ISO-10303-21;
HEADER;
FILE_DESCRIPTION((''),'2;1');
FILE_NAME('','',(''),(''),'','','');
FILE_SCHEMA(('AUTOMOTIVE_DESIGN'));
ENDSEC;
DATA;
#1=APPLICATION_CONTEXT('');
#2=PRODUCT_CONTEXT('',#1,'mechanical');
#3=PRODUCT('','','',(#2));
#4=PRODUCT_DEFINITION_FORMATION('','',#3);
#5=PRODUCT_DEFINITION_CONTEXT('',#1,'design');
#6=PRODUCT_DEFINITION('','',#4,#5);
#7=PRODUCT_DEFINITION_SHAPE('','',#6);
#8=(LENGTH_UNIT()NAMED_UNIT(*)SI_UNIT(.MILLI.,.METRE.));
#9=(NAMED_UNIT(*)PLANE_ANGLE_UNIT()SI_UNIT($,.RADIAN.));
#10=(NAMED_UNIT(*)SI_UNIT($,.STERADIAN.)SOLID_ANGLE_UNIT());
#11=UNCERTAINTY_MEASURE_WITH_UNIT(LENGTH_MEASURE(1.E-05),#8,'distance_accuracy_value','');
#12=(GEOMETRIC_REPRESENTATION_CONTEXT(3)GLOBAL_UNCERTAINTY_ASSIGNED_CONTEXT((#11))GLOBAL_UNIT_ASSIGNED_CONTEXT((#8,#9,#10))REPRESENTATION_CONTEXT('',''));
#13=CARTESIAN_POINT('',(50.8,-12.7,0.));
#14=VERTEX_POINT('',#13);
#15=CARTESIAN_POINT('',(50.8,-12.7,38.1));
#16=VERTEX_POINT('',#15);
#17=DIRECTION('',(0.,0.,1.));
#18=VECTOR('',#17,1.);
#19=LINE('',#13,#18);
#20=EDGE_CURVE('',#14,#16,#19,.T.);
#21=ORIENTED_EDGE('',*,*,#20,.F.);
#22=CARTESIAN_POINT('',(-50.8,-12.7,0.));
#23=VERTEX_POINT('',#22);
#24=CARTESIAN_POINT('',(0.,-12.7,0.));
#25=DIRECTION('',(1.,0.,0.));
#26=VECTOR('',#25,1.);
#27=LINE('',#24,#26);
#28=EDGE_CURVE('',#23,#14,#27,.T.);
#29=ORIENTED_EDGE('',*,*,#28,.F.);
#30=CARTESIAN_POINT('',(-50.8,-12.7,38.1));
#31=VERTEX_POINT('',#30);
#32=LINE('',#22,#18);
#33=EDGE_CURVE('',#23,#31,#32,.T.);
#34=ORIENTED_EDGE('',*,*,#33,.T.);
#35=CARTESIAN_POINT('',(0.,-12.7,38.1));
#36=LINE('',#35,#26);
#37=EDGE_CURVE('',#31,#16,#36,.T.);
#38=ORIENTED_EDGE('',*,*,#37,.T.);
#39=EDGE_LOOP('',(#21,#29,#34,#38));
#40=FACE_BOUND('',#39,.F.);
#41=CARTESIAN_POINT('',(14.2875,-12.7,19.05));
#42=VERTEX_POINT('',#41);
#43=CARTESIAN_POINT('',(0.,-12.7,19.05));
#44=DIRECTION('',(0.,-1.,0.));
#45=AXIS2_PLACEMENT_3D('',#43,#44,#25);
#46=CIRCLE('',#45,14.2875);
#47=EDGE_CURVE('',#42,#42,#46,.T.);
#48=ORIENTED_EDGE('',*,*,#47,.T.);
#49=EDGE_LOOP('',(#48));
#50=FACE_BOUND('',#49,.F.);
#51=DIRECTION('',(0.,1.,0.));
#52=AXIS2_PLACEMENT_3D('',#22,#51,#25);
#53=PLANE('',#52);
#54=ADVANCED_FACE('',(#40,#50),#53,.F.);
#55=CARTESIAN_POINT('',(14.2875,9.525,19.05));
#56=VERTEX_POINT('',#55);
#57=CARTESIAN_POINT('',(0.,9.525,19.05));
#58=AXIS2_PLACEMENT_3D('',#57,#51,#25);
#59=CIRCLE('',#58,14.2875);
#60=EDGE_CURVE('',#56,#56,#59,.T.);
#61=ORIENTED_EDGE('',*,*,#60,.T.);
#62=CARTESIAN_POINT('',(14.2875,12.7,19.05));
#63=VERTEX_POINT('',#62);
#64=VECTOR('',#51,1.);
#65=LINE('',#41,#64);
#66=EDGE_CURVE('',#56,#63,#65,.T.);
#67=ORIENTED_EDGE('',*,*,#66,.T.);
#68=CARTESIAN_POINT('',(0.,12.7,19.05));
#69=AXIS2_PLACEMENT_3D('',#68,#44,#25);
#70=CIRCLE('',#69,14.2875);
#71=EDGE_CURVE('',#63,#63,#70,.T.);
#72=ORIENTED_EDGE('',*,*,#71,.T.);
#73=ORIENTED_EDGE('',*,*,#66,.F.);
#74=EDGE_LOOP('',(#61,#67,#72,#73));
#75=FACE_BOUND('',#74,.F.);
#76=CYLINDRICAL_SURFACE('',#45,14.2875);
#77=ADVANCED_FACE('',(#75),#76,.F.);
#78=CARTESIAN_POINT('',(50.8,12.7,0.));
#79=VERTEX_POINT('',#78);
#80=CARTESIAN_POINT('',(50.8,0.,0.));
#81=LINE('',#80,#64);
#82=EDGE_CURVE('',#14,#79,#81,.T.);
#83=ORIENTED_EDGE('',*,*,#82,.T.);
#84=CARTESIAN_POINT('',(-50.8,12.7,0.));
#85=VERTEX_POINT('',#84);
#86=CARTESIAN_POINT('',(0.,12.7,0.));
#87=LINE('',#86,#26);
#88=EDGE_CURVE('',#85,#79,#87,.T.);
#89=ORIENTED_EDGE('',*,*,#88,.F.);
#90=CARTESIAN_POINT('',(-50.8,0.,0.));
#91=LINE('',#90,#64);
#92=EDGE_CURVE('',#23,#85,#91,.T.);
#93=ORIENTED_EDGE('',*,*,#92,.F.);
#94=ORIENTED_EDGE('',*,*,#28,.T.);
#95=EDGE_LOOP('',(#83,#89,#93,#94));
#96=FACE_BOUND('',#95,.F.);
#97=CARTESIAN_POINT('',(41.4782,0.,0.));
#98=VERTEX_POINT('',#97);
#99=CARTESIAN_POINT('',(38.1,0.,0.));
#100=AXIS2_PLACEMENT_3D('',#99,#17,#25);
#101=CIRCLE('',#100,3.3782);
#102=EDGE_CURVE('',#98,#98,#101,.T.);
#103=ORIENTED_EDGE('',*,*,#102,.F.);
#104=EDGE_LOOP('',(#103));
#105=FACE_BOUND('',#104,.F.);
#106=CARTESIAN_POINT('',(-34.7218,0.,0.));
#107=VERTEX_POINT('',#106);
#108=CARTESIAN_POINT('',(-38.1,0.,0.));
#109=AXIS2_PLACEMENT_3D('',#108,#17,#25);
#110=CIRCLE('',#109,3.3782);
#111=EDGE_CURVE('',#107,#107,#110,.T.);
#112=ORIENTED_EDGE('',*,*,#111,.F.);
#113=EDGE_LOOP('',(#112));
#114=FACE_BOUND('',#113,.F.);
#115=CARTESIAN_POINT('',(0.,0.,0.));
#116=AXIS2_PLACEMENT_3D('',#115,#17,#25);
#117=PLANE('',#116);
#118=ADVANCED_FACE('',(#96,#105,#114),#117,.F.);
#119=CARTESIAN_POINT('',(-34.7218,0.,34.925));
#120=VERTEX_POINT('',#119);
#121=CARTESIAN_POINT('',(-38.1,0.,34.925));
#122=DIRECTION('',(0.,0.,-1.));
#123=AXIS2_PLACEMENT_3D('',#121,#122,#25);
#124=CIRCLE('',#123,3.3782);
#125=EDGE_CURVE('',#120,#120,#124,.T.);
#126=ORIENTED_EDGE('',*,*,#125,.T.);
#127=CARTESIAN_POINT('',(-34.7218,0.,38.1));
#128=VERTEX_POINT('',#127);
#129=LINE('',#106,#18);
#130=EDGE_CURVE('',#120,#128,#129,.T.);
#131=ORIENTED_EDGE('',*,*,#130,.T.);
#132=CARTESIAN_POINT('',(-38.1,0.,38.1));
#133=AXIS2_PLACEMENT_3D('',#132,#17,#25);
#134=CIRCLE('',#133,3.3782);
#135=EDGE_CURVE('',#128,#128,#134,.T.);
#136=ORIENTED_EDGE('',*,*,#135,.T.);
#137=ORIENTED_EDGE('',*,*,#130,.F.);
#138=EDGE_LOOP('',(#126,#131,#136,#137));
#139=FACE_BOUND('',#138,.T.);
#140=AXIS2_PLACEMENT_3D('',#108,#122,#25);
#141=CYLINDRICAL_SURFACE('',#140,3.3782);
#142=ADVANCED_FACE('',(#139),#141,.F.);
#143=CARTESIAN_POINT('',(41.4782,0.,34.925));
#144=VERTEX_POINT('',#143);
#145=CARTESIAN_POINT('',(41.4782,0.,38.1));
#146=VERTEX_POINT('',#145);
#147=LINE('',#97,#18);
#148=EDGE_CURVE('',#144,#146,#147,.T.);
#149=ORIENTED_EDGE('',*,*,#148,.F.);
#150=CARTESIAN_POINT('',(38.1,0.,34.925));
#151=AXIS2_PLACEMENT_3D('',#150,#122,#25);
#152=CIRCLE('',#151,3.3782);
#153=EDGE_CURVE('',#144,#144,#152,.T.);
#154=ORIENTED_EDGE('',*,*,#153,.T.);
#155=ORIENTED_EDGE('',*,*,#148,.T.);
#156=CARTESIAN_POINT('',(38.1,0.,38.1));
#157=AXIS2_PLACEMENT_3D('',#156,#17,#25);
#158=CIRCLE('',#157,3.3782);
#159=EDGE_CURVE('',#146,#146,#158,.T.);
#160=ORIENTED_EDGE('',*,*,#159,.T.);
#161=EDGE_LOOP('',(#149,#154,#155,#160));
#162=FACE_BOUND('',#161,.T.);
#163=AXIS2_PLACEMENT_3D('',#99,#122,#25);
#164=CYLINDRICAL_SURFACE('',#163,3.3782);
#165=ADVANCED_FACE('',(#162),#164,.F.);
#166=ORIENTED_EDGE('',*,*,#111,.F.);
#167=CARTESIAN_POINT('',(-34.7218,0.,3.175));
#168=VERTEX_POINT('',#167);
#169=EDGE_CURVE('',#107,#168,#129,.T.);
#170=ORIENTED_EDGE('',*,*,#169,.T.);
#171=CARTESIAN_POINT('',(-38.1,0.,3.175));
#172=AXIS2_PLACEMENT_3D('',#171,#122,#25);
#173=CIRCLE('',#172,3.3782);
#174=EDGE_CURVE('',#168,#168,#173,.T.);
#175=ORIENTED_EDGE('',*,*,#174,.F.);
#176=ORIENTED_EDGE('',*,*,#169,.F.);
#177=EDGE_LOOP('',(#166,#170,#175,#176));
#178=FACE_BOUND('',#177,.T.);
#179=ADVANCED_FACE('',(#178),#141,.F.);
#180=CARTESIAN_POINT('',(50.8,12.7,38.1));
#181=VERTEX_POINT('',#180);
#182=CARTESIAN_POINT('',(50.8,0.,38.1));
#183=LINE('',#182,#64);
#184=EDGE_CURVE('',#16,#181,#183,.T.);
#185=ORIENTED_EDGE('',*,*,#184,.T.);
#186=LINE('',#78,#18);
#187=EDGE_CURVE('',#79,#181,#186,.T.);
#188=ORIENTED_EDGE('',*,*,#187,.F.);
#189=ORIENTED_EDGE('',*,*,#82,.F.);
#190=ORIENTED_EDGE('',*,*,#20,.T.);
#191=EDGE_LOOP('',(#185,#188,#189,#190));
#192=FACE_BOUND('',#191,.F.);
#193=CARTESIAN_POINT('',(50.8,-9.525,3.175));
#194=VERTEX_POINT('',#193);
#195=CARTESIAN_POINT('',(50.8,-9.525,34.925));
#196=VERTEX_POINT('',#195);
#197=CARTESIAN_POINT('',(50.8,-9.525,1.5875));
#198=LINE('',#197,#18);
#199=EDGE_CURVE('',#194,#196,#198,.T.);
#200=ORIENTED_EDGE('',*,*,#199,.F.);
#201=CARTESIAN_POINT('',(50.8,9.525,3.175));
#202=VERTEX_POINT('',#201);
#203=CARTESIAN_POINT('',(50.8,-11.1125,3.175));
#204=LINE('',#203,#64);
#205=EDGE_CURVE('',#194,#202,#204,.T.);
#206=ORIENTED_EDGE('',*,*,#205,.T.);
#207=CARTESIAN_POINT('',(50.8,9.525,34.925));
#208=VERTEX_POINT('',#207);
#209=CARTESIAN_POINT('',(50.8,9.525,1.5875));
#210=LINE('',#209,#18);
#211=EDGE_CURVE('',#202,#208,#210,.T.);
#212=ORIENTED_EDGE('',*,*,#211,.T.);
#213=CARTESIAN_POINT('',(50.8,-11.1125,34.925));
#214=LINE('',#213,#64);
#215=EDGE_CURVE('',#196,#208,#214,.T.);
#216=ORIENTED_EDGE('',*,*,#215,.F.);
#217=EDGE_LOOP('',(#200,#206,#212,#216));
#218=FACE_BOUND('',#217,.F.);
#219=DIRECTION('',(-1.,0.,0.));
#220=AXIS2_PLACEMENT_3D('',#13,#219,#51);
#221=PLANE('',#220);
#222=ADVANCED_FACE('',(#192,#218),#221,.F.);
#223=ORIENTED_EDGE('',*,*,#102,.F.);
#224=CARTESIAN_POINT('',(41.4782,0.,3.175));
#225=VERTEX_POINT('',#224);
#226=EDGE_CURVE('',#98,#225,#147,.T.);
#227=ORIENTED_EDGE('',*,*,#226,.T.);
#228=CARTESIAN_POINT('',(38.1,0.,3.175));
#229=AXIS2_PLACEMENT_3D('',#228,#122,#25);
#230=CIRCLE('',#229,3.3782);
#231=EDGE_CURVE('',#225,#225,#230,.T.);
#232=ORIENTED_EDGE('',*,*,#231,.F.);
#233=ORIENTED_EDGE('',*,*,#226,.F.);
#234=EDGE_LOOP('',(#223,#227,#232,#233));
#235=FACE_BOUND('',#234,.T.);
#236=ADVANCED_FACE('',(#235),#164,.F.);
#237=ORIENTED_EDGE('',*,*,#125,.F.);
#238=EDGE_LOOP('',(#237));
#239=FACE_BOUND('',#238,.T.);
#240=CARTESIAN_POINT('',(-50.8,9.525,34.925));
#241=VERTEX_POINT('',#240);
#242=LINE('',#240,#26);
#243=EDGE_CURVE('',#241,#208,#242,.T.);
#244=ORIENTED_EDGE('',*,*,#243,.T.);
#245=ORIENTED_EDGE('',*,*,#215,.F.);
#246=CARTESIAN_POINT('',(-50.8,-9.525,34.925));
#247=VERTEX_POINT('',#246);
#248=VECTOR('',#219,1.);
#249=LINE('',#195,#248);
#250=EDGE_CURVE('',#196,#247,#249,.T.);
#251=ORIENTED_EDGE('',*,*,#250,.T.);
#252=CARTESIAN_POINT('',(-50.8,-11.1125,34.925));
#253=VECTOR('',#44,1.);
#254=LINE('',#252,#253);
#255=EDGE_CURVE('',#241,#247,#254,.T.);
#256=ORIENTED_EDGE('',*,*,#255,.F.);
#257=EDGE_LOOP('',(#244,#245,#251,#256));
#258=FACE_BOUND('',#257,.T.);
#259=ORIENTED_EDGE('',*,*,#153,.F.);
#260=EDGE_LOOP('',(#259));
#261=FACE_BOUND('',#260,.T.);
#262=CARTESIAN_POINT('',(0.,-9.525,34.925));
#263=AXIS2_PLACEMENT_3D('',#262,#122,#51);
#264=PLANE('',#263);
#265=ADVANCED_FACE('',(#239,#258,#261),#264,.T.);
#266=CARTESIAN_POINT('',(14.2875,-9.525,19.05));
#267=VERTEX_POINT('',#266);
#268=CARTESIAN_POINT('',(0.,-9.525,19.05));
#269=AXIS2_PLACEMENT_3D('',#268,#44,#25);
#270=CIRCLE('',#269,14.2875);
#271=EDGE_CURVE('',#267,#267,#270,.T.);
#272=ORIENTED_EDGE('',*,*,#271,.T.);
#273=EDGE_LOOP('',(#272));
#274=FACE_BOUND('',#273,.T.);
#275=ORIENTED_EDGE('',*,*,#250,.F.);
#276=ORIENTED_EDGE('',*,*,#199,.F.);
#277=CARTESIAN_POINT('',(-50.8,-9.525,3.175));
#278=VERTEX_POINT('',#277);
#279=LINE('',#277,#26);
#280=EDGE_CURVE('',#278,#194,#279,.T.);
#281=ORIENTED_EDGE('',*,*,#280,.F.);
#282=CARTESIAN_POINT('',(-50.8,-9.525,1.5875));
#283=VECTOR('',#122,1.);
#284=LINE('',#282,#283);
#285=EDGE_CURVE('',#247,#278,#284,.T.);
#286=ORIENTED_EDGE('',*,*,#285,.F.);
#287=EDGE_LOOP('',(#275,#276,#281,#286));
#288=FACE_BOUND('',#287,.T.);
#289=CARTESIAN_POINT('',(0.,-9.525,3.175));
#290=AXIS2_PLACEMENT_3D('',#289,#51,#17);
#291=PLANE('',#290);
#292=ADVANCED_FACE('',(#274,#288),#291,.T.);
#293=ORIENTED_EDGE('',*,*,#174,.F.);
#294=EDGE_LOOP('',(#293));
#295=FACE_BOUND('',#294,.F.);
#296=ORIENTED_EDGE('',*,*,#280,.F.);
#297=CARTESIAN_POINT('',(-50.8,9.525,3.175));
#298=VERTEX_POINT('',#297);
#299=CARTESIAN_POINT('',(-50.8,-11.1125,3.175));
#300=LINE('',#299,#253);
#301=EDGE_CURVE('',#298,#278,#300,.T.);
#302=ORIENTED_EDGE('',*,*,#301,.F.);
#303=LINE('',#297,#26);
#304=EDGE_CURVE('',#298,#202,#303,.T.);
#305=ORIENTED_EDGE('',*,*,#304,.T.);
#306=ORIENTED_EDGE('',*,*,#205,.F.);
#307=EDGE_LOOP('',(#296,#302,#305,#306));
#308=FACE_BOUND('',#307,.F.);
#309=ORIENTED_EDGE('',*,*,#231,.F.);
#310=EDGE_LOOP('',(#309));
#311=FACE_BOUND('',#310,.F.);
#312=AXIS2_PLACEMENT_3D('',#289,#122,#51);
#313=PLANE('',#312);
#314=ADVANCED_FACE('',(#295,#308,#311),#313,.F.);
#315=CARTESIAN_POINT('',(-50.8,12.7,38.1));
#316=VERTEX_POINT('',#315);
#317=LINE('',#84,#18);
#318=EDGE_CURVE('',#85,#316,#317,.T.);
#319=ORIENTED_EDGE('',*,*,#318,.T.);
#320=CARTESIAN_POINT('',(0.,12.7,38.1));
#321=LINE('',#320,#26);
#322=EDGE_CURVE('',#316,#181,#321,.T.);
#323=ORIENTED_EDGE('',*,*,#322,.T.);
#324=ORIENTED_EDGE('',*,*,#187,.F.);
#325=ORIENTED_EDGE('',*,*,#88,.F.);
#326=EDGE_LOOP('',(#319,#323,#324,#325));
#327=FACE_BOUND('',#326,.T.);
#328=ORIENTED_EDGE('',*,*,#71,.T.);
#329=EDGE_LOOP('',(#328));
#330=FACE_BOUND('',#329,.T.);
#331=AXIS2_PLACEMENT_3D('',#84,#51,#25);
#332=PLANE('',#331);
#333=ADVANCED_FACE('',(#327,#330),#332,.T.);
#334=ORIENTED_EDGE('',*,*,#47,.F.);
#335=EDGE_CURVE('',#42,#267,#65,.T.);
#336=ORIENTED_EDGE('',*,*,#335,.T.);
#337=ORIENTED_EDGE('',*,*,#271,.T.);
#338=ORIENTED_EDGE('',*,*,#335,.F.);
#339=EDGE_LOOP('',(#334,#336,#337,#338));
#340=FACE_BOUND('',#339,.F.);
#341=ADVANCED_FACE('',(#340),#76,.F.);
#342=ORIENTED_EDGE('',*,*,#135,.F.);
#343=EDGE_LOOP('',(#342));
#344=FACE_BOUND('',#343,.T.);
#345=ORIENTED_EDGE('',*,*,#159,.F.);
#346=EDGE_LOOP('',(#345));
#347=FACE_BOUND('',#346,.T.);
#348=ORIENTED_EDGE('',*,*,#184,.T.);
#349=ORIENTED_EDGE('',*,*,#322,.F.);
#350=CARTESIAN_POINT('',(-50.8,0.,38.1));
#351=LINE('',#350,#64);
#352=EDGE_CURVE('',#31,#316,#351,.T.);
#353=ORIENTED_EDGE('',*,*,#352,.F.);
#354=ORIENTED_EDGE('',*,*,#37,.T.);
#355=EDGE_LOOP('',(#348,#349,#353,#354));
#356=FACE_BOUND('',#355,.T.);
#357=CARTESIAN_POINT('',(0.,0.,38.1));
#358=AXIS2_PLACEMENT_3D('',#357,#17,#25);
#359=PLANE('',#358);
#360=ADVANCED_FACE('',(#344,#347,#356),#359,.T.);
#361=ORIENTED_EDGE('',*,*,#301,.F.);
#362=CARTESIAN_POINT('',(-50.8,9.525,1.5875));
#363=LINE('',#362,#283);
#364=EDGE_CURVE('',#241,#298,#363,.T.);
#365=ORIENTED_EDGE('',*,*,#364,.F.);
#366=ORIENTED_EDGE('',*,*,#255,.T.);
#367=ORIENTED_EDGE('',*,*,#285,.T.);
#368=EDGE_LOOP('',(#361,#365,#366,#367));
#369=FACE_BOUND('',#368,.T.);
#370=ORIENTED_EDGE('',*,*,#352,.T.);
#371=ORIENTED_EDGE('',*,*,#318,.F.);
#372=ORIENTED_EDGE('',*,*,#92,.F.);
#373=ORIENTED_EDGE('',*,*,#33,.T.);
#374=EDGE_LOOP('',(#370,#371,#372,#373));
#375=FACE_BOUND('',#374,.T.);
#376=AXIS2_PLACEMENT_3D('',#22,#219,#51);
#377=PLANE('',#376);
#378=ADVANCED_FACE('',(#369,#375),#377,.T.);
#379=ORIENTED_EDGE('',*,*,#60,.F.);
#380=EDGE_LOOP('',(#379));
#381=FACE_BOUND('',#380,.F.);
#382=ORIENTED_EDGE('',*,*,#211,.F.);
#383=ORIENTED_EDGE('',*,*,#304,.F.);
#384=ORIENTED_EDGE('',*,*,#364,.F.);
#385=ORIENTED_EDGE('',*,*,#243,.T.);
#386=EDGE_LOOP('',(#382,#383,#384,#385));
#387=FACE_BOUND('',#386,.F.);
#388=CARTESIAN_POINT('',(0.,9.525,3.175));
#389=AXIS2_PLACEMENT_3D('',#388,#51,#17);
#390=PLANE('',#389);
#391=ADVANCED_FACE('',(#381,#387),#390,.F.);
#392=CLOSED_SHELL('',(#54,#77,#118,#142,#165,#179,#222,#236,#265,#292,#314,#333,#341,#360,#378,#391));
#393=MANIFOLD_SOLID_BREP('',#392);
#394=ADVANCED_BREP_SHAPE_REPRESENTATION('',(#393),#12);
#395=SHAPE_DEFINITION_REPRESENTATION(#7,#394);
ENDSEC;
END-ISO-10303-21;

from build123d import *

# Parameters (mm, degrees)
F0_W          = 101.6
F0_H          = 25.4
F0_R          = 3.3782
F1_DEPTH      = 38.1
F2_R          = 14.2875
F3_DEPTH      = 25.4
F4_W          = 19.05
F4_H          = 31.75
F5_DEPTH      = 50.801
F5_DEPTH_BACK = 50.801


# Not quite as in the source:
# - a feature names something its author has since deleted; it is built from what else it names


with BuildPart() as f1:
    # F0 (on Top) → F1 (new body)
    with BuildSketch(Plane.XY):
        Rectangle(F0_W, F0_H)
        with Locations((-38.1, 0)):
            Circle(F0_R, mode=Mode.SUBTRACT)
        with Locations((38.1, 0)):
            Circle(F0_R, mode=Mode.SUBTRACT)
    extrude(amount=F1_DEPTH)

    # F2 (on face) → F3 (cut)
    with BuildSketch(Plane.XZ.offset(12.7)):
        with Locations((0, 19.05)):
            Circle(F2_R)
    extrude(amount=-F3_DEPTH, mode=Mode.SUBTRACT)

    # F4 (on Right) → F5 (cut, two sides)
    with BuildSketch(Plane.YZ) as f5_sk:
        with Locations((0, 19.05)):
            Rectangle(F4_W, F4_H)
    extrude(amount=-F5_DEPTH, mode=Mode.SUBTRACT)
    extrude(f5_sk.sketch, amount=F5_DEPTH_BACK, mode=Mode.SUBTRACT)


solid = f1.part
